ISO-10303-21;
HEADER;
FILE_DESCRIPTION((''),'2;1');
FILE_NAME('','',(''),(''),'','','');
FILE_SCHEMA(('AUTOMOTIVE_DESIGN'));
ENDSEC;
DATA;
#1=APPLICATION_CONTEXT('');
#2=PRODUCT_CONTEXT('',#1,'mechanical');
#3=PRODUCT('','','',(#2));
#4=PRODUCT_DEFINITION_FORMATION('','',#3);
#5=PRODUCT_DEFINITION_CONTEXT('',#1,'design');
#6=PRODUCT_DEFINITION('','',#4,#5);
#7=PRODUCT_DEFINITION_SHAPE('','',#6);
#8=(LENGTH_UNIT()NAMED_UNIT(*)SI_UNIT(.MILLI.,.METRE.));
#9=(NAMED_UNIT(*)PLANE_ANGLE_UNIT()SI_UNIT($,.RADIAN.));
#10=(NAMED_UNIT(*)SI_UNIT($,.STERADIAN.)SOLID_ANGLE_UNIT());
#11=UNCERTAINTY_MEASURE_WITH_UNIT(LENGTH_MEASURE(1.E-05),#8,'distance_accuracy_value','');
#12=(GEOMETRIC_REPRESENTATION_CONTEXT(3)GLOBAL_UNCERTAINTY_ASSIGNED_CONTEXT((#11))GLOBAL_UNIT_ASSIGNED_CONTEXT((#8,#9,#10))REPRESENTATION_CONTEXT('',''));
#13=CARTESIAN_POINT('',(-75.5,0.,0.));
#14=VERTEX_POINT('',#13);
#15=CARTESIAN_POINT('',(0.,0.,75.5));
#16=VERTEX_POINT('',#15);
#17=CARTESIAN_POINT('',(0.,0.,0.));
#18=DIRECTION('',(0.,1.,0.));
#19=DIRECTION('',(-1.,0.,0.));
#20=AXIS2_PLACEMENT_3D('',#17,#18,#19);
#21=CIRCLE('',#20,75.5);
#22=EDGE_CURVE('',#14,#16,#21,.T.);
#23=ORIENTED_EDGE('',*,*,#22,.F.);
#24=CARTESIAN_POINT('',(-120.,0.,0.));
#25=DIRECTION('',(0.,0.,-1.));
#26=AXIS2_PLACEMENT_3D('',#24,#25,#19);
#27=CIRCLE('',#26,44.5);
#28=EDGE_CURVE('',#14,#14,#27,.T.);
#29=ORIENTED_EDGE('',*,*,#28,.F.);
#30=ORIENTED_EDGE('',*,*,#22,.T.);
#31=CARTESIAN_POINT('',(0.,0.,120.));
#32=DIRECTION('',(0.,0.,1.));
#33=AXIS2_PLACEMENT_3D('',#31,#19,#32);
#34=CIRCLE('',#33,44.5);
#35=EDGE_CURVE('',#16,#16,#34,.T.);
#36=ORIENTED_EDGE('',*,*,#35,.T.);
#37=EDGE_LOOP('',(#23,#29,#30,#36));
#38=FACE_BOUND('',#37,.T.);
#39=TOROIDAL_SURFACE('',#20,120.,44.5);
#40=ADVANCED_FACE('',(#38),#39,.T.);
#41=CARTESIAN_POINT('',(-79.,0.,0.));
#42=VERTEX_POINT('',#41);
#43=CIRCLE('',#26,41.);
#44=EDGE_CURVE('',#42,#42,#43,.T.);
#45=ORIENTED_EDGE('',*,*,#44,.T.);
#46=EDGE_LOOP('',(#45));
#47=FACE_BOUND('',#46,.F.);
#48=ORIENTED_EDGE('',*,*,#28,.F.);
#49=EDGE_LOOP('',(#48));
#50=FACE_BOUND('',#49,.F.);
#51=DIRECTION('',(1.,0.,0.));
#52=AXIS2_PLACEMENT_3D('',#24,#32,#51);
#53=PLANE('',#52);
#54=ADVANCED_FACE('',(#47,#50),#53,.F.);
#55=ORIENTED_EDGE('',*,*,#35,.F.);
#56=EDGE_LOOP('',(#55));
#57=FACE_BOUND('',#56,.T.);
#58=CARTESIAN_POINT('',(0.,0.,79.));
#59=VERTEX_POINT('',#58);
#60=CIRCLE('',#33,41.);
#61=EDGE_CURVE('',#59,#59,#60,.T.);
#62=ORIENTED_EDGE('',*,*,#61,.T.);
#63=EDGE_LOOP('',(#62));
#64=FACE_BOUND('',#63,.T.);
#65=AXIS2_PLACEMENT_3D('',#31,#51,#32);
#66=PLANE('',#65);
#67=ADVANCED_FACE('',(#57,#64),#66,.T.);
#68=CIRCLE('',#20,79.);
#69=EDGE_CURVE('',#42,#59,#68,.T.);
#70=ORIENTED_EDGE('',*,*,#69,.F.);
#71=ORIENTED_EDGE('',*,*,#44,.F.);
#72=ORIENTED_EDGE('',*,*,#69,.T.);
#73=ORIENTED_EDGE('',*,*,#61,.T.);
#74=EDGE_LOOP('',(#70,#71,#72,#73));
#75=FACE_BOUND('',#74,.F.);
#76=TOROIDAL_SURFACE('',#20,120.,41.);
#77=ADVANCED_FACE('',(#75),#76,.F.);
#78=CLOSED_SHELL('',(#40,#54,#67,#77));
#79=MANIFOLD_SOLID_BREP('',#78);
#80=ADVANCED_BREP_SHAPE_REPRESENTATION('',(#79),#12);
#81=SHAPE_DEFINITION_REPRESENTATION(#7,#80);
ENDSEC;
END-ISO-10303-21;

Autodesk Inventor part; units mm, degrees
ref_plane "YZ Plane" through (0, 0, 0) normal (1, 0, 0) x (0, 1, 0)
ref_plane "XZ Plane" through (0, 0, 0) normal (0, 1, 0) x (-1, 0, 0)
ref_plane "XY Plane" through (0, 0, 0) normal (0, 0, 1) x (1, 0, 0)
sketch "Sketch1" plane through (0, 0, 0) normal (0, 0, 1) x (1, 0, 0)
  line L0 (0, 0) -> (-120, 0)
  circle A0 centre (-120, 0) radius 41
  circle A1 centre (-120, 0) radius 44.5
  dimension "d2" = 89
  dimension "d3" = 3.5
  dimension "d4" = 120
sketch "Sketch2" plane through (0, 0, 0) normal (0, 1, 0) x (-1, 0, 0)
  arc A0 (120, 0) -> (0, 120) centre (0, 0) ccw
  line L0 (0, 0) -> (120, 0) construction
  line L1 (0, 0) -> (0, 120) construction
  dimension "d5" = 240
  dimension "d7" = 90
sweep "Sweep1" add profiles "Sketch1" path "Sketch2"
equation "\"d2\" = Dh"
equation "\"d3\" = S_"
equation "\"d4\" = R"
equation "\"d5\" = 2 * R"
equation "\"d7\" = Angle"
equation "\"Dh\" = 89"
equation "\"S_\" = 3.5"
equation "\"R\" = 120"
equation "\"Angle\" = 90deg"
properties part number "Elbow 90° 89x3.5 GOST 17375-83" material "Steel, Mild"
